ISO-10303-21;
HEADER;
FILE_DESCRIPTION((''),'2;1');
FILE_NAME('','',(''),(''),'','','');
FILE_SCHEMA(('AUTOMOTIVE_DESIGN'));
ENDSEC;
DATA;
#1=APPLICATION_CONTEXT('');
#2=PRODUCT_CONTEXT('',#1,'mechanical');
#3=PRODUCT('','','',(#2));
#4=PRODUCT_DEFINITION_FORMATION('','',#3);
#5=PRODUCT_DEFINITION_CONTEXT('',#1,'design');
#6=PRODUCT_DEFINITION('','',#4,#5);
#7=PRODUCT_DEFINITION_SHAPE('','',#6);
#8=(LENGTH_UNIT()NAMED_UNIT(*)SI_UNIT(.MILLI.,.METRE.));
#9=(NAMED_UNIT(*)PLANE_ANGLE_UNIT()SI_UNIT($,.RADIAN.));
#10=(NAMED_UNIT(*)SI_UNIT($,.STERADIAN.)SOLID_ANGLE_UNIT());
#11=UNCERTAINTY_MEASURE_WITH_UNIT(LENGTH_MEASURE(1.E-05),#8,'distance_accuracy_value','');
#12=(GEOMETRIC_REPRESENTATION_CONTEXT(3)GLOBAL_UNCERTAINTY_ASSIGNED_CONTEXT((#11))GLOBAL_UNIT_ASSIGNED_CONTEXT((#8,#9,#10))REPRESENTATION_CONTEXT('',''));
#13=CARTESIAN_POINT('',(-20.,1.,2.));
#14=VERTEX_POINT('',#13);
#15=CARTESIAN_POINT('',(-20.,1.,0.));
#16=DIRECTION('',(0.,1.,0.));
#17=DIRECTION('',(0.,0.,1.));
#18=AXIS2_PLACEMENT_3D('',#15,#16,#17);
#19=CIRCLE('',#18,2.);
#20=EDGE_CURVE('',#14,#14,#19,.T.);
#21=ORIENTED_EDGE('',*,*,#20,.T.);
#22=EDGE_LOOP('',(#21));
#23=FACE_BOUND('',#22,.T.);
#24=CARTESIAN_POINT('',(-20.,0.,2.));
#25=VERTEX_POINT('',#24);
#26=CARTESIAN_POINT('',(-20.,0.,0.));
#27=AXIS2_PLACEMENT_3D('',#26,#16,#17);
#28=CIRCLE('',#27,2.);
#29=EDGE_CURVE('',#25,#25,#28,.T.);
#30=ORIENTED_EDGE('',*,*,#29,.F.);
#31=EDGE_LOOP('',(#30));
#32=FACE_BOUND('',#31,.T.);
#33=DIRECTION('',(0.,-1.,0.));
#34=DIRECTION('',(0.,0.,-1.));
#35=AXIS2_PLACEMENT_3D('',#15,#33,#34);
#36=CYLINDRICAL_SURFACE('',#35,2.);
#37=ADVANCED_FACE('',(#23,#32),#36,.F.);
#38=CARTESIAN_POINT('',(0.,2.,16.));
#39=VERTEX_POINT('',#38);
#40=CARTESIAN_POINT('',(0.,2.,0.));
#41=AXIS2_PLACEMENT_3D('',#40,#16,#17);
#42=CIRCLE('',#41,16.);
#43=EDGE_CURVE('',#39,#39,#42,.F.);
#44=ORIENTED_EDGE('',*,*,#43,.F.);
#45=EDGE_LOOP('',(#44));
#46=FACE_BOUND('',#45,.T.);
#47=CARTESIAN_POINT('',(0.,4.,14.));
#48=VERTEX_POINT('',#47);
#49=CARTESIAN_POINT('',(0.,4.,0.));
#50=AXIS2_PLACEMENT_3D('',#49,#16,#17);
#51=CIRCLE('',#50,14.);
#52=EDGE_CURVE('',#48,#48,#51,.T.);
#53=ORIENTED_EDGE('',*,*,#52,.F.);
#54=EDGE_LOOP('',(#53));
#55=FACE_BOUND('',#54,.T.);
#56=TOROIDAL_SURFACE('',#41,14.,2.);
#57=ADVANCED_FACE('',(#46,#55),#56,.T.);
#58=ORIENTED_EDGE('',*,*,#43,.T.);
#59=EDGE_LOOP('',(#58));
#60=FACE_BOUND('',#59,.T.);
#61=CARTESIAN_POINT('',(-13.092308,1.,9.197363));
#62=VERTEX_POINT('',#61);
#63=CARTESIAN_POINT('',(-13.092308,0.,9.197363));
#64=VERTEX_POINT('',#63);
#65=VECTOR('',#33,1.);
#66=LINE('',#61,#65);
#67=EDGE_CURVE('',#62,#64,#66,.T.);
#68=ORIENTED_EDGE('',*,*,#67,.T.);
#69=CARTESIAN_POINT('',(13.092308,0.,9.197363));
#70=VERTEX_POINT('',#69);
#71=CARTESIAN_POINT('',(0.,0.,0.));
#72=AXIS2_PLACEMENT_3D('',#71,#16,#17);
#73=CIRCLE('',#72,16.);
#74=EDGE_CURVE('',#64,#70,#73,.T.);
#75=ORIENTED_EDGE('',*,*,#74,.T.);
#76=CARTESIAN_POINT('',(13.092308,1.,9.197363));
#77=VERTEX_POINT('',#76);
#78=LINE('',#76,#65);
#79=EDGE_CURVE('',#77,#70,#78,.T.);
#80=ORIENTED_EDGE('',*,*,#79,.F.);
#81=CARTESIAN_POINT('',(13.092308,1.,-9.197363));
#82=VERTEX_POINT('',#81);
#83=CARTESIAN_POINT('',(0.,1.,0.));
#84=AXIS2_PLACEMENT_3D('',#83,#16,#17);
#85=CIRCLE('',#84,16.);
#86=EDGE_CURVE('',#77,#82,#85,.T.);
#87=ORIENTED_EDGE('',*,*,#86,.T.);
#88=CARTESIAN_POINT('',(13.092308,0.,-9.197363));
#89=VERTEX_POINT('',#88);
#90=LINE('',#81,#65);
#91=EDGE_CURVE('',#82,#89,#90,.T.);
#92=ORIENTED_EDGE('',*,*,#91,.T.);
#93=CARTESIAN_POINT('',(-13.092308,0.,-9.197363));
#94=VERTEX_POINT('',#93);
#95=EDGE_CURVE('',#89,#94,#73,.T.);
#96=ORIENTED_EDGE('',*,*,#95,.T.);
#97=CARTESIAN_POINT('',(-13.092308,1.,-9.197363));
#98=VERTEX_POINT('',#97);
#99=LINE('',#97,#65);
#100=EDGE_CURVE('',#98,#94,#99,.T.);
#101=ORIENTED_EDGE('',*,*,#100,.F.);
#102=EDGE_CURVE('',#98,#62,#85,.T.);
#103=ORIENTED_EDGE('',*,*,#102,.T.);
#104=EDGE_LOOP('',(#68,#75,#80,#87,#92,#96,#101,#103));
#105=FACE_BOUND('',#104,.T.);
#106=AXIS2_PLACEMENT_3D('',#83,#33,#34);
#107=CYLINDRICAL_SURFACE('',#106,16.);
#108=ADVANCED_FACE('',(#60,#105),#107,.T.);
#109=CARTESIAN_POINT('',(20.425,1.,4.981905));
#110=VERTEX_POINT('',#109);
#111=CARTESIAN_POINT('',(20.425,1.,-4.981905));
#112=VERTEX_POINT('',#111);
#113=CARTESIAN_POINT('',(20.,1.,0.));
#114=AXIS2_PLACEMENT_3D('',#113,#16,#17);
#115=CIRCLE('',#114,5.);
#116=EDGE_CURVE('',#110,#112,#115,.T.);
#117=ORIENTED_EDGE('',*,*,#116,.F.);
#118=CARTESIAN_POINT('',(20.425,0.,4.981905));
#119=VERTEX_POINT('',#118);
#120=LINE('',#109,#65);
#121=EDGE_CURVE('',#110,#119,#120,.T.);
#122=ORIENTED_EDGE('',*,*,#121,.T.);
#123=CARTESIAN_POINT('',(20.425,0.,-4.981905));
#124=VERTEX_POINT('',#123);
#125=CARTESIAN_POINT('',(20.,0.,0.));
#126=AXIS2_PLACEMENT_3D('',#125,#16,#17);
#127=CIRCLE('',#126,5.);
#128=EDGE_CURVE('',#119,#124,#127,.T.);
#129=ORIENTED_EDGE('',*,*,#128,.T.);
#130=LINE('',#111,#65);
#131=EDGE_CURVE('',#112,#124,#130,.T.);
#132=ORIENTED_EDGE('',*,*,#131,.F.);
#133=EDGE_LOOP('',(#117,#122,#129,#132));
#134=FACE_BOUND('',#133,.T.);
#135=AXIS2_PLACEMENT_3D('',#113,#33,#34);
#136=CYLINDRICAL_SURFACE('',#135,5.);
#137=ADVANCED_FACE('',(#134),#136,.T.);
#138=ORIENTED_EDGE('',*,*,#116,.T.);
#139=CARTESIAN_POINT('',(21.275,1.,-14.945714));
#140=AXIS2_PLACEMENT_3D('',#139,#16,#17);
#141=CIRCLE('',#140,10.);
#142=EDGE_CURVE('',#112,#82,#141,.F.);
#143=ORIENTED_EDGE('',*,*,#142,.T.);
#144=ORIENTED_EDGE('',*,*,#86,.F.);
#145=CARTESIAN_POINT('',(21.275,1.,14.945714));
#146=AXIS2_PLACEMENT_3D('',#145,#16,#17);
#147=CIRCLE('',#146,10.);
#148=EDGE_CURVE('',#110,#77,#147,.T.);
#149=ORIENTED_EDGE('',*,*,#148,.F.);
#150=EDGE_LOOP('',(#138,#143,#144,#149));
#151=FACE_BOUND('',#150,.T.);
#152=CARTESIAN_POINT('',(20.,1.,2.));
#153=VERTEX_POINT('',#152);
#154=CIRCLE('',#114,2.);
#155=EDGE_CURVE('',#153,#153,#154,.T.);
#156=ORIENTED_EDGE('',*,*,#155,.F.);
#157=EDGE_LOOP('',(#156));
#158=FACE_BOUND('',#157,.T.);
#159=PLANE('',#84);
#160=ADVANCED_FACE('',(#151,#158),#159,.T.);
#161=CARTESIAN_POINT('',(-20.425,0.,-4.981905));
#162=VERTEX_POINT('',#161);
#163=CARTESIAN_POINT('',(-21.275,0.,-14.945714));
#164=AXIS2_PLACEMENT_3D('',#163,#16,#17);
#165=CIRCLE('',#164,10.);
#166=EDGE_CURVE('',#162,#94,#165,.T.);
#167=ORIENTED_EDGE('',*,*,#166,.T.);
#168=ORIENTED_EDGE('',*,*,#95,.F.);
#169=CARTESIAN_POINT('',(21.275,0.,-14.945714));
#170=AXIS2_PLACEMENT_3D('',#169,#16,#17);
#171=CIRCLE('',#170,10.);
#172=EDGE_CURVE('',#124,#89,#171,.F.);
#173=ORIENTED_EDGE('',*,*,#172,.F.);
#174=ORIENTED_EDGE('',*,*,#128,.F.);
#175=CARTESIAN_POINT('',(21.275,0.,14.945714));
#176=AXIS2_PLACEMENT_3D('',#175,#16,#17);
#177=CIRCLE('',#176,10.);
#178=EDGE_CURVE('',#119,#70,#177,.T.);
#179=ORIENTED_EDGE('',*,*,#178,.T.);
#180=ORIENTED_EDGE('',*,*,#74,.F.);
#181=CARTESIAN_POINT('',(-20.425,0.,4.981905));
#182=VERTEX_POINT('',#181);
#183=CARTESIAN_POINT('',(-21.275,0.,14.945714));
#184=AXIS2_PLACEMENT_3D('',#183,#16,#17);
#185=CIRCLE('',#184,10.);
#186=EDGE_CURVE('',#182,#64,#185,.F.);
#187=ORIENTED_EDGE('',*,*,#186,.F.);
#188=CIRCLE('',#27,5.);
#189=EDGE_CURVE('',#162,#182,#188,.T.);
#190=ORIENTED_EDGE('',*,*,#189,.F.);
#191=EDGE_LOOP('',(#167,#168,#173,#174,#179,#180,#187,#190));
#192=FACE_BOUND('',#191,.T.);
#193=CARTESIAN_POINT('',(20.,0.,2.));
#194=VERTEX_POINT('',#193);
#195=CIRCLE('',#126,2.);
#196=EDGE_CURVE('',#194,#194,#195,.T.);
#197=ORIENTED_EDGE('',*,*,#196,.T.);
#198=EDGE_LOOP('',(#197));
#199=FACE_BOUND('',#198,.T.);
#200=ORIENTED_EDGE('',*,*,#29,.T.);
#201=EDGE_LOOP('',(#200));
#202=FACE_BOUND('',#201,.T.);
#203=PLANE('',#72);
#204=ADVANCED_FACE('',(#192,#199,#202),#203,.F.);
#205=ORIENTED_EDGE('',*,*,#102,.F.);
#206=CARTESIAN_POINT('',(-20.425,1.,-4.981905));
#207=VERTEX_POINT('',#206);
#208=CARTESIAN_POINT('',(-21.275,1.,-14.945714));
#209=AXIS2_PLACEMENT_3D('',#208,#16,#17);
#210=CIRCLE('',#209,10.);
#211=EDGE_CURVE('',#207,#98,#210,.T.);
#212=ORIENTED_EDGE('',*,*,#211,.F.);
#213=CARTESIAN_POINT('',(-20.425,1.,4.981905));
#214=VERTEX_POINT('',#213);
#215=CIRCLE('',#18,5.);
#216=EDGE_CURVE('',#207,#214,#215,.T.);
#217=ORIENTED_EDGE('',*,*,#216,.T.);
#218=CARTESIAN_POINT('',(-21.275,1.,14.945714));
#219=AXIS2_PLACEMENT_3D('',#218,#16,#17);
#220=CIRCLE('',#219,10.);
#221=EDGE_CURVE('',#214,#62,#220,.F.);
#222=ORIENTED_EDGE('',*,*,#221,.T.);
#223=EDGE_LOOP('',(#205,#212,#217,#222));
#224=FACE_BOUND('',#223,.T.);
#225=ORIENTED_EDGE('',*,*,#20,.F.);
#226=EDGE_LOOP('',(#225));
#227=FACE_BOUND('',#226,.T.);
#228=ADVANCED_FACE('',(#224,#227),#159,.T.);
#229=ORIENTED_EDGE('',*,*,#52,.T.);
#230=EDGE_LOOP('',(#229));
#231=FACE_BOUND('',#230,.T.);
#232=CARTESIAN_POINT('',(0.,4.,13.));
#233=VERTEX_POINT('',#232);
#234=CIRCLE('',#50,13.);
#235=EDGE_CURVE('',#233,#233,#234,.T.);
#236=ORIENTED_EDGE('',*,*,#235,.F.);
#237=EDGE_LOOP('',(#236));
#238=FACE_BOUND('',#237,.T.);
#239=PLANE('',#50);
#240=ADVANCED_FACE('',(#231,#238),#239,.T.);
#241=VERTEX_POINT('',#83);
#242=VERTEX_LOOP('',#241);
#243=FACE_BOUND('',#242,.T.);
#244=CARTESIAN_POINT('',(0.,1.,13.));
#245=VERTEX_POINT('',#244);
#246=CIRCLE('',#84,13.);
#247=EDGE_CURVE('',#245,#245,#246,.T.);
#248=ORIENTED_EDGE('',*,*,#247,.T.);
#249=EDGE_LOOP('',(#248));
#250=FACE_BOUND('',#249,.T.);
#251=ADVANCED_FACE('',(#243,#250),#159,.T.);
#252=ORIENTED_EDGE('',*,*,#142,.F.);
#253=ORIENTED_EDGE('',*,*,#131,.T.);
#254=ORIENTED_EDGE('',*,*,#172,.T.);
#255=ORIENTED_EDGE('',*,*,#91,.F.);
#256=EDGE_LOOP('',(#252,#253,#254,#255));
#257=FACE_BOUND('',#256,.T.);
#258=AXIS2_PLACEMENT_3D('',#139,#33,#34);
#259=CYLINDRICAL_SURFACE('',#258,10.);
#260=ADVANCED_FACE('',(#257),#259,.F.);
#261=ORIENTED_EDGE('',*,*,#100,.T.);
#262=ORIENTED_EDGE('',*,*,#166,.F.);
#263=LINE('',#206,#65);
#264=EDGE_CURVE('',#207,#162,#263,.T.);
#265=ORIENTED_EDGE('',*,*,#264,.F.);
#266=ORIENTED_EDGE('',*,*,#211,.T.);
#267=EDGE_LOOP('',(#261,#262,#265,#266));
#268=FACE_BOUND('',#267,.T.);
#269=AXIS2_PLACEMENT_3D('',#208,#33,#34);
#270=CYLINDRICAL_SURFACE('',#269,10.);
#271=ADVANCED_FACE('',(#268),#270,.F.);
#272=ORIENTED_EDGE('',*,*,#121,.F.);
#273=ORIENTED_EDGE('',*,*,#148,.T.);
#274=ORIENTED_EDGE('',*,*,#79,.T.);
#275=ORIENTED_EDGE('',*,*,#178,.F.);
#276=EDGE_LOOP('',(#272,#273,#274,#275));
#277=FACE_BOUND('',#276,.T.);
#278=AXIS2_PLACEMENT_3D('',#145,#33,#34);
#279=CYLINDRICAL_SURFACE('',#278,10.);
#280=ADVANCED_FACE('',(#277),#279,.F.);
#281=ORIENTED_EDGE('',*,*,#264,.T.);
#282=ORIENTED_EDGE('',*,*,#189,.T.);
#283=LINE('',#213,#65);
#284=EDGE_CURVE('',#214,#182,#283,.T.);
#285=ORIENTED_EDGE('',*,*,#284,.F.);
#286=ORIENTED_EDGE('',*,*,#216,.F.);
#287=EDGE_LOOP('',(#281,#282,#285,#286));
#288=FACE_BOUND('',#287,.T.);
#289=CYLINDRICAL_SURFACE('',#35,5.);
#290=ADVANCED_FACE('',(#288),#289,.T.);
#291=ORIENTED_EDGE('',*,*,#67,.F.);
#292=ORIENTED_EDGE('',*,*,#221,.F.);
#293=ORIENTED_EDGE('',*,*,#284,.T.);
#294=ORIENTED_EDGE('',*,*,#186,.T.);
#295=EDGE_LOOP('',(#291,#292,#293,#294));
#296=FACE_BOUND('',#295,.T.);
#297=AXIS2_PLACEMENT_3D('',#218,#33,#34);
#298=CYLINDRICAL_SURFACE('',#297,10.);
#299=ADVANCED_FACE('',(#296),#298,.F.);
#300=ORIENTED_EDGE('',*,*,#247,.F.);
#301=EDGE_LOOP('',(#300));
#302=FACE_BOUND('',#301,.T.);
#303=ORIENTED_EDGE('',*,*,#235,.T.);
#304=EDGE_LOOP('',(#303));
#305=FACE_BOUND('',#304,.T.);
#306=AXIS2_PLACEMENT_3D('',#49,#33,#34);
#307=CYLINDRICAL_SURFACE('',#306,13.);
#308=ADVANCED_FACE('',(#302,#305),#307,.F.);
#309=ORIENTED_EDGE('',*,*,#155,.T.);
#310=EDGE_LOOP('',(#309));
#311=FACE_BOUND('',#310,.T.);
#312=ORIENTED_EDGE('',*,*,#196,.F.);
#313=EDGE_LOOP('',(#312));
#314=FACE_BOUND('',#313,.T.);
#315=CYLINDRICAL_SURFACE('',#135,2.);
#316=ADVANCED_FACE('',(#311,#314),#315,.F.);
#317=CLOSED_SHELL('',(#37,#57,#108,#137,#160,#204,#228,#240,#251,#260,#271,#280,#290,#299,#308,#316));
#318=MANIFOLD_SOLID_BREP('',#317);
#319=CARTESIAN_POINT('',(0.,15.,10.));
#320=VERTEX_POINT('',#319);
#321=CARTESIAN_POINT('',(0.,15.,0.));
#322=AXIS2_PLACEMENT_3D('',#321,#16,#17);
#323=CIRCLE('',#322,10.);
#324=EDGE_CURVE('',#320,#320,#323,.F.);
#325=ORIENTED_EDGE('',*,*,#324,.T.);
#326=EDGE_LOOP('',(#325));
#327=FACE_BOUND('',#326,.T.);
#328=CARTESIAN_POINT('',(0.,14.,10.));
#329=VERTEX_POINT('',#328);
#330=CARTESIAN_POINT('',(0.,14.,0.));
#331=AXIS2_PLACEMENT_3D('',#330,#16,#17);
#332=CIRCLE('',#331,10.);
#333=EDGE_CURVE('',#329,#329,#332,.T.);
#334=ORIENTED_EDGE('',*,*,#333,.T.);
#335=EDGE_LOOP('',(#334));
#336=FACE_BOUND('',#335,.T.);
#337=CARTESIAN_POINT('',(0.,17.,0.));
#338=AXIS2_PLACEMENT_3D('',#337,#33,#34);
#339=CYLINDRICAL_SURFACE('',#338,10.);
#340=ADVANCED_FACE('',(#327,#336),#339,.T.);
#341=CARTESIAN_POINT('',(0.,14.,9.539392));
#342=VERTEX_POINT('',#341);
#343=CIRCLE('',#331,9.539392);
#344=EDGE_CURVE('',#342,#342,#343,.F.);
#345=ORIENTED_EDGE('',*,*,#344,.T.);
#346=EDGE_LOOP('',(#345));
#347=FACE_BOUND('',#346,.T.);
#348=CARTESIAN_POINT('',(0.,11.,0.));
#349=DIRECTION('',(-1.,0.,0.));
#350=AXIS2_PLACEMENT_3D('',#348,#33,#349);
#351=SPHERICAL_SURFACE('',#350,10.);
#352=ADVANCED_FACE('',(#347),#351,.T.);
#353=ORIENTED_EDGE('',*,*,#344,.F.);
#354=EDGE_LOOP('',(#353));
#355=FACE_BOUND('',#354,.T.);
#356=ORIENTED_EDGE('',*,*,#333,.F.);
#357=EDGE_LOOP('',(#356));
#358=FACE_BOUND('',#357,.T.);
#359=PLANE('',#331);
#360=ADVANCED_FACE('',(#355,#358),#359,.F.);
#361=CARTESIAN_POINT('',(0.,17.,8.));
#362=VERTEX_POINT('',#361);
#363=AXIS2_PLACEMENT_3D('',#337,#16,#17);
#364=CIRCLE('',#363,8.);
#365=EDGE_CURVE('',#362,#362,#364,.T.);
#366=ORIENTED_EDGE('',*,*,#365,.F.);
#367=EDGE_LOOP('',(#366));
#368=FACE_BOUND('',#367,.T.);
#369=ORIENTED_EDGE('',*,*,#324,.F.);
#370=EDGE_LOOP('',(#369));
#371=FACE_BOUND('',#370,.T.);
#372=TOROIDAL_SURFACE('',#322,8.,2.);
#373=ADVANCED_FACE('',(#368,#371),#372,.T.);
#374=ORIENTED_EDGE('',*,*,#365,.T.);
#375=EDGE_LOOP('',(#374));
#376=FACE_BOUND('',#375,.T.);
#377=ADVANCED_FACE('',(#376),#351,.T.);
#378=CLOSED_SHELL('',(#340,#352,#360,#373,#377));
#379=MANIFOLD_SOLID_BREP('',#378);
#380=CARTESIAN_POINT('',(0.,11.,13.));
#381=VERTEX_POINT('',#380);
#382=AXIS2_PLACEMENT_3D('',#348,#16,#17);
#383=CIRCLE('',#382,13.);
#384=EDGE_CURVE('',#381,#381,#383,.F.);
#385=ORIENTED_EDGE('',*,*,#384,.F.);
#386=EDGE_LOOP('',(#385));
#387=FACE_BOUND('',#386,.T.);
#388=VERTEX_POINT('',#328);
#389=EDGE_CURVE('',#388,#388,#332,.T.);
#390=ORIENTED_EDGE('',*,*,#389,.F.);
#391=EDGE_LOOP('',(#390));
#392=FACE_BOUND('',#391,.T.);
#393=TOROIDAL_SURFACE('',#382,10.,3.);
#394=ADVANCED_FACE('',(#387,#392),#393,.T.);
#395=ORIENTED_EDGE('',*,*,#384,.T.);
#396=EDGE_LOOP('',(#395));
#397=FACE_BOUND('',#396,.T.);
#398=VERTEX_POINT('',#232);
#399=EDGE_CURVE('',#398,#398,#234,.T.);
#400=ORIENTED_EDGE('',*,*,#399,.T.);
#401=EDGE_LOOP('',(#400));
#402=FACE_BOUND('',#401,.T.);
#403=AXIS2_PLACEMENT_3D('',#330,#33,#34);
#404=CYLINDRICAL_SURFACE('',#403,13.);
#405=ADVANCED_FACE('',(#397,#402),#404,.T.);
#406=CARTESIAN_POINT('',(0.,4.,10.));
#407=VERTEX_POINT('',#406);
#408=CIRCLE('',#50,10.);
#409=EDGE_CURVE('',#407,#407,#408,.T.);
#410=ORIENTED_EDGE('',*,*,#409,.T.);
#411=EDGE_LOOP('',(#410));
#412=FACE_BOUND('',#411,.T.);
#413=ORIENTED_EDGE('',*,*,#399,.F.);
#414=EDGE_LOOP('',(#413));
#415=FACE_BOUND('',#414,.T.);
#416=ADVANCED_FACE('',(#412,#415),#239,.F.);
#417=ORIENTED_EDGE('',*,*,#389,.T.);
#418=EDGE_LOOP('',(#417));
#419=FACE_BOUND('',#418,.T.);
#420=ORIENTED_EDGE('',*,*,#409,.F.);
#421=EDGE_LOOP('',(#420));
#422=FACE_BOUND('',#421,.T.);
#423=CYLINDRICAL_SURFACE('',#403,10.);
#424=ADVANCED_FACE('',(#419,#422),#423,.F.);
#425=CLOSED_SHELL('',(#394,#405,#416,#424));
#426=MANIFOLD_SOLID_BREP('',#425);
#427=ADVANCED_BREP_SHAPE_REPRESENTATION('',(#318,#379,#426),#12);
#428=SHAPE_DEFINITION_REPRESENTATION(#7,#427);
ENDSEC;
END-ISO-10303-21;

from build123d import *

# Parameters (mm, degrees)
SKETCH1_R           = 2
BOSS_EXTRUDE1_DEPTH = 1
SKETCH2_R           = 16
SKETCH2_R_2         = 13
BOSS_EXTRUDE2_DEPTH = 3
FILLET2_R           = 2
SKETCH3_R           = 13
SKETCH3_R_2         = 10
BOSS_EXTRUDE3_DEPTH = 10
SKETCH4_R           = 10
SKETCH4_R_2         = 8
BOSS_EXTRUDE4_DEPTH = 3
FILLET3_R           = 2
FILLET4_R           = 3


with BuildPart() as part:
    # Sketch1 → Boss-Extrude1 (new body)
    with BuildSketch(Plane(origin=(0, 0, 0), x_dir=(1, 0, 0), z_dir=(0, 1, 0))):
        with BuildLine():
            ThreePointArc((-20.425, 4.981904756), (-25, 0), (-20.425, -4.981904756))
            ThreePointArc((-20.425, -4.981904756), (-16.291035329, -6.276222002), (-13.092307692, -9.197362627))
            ThreePointArc((-13.092307692, -9.197362627), (0, -16), (13.092307692, -9.197362627))
            ThreePointArc((13.092307692, -9.197362627), (16.291035329, -6.276222002), (20.425, -4.981904756))
            ThreePointArc((20.425, -4.981904756), (25, 0), (20.425, 4.981904756))
            ThreePointArc((20.425, 4.981904756), (16.291035329, 6.276222002), (13.092307692, 9.197362627))
            ThreePointArc((13.092307692, 9.197362627), (0, 16), (-13.092307692, 9.197362627))
            ThreePointArc((-13.092307692, 9.197362627), (-16.291035329, 6.276222002), (-20.425, 4.981904756))
        make_face()
        with Locations(Location((-20, 0, 0), (0, 0, 270))):
            Circle(SKETCH1_R, mode=Mode.SUBTRACT)
        with Locations(Location((20, 0, 0), (0, 0, 270))):
            Circle(SKETCH1_R, mode=Mode.SUBTRACT)
    extrude(amount=BOSS_EXTRUDE1_DEPTH)

    # Sketch2 → Boss-Extrude2 (add)
    with BuildSketch(Plane(origin=(0, 1, 0), x_dir=(1, 0, 0), z_dir=(0, 1, 0))):
        with Locations(Location((0, 0, 0), (0, 0, 35.08808946))):
            Circle(SKETCH2_R)
        with Locations(Location((0, 0, 0), (0, 0, 270))):
            Circle(SKETCH2_R_2, mode=Mode.SUBTRACT)
    extrude(amount=BOSS_EXTRUDE2_DEPTH)

    # Fillet2
    fillet2_edges = [part.edges().sort_by_distance(p)[0] for p in [
        (-13.092307692, 4, 9.197362627),
    ]]
    fillet(fillet2_edges, radius=FILLET2_R)


with BuildPart() as body_2:
    # Sketch3 → Boss-Extrude3 (new body)
    with BuildSketch(Plane(origin=(0, 4, 0), x_dir=(1, 0, 0), z_dir=(0, 1, 0))):
        with Locations(Location((0, 0, 0), (0, 0, 270))):
            Circle(SKETCH3_R)
        with Locations(Location((0, 0, 0), (0, 0, 270))):
            Circle(SKETCH3_R_2, mode=Mode.SUBTRACT)
    extrude(amount=BOSS_EXTRUDE3_DEPTH)

    # Fillet4
    fillet4_edges = [body_2.edges().sort_by_distance(p)[0] for p in [
        (0, 14, -13),
    ]]
    fillet(fillet4_edges, radius=FILLET4_R - 0.0001)  # a hair under: the kernel refuses the full size


with BuildPart() as body_3:
    # Sketch4 → Boss-Extrude4 (new body)
    with BuildSketch(Plane(origin=(0, 14, 0), x_dir=(1, 0, 0), z_dir=(0, 1, 0))):
        with Locations(Location((0, 0, 0), (0, 0, 270))):
            Circle(SKETCH4_R)
        with Locations(Location((0, 0, 0), (0, 0, 270))):
            Circle(SKETCH4_R_2, mode=Mode.SUBTRACT)
    extrude(amount=BOSS_EXTRUDE4_DEPTH)

    # Fillet3
    fillet3_edges = [body_3.edges().sort_by_distance(p)[0] for p in [
        (0, 17, -10),
    ]]
    fillet(fillet3_edges, radius=FILLET3_R - 0.0001)  # a hair under: the kernel refuses the full size

    # Sketch5 → Revolve2 (revolve)
    with BuildSketch(Plane.XY):
        with BuildLine():
            Line((0, 1), (0, 21))
            ThreePointArc((0, 21), (-10, 11), (0, 1))
        make_face()
    revolve(axis=Axis((0, 1, 0), (0, 1, 0)))


solid = Compound([part.part, body_2.part, body_3.part])
